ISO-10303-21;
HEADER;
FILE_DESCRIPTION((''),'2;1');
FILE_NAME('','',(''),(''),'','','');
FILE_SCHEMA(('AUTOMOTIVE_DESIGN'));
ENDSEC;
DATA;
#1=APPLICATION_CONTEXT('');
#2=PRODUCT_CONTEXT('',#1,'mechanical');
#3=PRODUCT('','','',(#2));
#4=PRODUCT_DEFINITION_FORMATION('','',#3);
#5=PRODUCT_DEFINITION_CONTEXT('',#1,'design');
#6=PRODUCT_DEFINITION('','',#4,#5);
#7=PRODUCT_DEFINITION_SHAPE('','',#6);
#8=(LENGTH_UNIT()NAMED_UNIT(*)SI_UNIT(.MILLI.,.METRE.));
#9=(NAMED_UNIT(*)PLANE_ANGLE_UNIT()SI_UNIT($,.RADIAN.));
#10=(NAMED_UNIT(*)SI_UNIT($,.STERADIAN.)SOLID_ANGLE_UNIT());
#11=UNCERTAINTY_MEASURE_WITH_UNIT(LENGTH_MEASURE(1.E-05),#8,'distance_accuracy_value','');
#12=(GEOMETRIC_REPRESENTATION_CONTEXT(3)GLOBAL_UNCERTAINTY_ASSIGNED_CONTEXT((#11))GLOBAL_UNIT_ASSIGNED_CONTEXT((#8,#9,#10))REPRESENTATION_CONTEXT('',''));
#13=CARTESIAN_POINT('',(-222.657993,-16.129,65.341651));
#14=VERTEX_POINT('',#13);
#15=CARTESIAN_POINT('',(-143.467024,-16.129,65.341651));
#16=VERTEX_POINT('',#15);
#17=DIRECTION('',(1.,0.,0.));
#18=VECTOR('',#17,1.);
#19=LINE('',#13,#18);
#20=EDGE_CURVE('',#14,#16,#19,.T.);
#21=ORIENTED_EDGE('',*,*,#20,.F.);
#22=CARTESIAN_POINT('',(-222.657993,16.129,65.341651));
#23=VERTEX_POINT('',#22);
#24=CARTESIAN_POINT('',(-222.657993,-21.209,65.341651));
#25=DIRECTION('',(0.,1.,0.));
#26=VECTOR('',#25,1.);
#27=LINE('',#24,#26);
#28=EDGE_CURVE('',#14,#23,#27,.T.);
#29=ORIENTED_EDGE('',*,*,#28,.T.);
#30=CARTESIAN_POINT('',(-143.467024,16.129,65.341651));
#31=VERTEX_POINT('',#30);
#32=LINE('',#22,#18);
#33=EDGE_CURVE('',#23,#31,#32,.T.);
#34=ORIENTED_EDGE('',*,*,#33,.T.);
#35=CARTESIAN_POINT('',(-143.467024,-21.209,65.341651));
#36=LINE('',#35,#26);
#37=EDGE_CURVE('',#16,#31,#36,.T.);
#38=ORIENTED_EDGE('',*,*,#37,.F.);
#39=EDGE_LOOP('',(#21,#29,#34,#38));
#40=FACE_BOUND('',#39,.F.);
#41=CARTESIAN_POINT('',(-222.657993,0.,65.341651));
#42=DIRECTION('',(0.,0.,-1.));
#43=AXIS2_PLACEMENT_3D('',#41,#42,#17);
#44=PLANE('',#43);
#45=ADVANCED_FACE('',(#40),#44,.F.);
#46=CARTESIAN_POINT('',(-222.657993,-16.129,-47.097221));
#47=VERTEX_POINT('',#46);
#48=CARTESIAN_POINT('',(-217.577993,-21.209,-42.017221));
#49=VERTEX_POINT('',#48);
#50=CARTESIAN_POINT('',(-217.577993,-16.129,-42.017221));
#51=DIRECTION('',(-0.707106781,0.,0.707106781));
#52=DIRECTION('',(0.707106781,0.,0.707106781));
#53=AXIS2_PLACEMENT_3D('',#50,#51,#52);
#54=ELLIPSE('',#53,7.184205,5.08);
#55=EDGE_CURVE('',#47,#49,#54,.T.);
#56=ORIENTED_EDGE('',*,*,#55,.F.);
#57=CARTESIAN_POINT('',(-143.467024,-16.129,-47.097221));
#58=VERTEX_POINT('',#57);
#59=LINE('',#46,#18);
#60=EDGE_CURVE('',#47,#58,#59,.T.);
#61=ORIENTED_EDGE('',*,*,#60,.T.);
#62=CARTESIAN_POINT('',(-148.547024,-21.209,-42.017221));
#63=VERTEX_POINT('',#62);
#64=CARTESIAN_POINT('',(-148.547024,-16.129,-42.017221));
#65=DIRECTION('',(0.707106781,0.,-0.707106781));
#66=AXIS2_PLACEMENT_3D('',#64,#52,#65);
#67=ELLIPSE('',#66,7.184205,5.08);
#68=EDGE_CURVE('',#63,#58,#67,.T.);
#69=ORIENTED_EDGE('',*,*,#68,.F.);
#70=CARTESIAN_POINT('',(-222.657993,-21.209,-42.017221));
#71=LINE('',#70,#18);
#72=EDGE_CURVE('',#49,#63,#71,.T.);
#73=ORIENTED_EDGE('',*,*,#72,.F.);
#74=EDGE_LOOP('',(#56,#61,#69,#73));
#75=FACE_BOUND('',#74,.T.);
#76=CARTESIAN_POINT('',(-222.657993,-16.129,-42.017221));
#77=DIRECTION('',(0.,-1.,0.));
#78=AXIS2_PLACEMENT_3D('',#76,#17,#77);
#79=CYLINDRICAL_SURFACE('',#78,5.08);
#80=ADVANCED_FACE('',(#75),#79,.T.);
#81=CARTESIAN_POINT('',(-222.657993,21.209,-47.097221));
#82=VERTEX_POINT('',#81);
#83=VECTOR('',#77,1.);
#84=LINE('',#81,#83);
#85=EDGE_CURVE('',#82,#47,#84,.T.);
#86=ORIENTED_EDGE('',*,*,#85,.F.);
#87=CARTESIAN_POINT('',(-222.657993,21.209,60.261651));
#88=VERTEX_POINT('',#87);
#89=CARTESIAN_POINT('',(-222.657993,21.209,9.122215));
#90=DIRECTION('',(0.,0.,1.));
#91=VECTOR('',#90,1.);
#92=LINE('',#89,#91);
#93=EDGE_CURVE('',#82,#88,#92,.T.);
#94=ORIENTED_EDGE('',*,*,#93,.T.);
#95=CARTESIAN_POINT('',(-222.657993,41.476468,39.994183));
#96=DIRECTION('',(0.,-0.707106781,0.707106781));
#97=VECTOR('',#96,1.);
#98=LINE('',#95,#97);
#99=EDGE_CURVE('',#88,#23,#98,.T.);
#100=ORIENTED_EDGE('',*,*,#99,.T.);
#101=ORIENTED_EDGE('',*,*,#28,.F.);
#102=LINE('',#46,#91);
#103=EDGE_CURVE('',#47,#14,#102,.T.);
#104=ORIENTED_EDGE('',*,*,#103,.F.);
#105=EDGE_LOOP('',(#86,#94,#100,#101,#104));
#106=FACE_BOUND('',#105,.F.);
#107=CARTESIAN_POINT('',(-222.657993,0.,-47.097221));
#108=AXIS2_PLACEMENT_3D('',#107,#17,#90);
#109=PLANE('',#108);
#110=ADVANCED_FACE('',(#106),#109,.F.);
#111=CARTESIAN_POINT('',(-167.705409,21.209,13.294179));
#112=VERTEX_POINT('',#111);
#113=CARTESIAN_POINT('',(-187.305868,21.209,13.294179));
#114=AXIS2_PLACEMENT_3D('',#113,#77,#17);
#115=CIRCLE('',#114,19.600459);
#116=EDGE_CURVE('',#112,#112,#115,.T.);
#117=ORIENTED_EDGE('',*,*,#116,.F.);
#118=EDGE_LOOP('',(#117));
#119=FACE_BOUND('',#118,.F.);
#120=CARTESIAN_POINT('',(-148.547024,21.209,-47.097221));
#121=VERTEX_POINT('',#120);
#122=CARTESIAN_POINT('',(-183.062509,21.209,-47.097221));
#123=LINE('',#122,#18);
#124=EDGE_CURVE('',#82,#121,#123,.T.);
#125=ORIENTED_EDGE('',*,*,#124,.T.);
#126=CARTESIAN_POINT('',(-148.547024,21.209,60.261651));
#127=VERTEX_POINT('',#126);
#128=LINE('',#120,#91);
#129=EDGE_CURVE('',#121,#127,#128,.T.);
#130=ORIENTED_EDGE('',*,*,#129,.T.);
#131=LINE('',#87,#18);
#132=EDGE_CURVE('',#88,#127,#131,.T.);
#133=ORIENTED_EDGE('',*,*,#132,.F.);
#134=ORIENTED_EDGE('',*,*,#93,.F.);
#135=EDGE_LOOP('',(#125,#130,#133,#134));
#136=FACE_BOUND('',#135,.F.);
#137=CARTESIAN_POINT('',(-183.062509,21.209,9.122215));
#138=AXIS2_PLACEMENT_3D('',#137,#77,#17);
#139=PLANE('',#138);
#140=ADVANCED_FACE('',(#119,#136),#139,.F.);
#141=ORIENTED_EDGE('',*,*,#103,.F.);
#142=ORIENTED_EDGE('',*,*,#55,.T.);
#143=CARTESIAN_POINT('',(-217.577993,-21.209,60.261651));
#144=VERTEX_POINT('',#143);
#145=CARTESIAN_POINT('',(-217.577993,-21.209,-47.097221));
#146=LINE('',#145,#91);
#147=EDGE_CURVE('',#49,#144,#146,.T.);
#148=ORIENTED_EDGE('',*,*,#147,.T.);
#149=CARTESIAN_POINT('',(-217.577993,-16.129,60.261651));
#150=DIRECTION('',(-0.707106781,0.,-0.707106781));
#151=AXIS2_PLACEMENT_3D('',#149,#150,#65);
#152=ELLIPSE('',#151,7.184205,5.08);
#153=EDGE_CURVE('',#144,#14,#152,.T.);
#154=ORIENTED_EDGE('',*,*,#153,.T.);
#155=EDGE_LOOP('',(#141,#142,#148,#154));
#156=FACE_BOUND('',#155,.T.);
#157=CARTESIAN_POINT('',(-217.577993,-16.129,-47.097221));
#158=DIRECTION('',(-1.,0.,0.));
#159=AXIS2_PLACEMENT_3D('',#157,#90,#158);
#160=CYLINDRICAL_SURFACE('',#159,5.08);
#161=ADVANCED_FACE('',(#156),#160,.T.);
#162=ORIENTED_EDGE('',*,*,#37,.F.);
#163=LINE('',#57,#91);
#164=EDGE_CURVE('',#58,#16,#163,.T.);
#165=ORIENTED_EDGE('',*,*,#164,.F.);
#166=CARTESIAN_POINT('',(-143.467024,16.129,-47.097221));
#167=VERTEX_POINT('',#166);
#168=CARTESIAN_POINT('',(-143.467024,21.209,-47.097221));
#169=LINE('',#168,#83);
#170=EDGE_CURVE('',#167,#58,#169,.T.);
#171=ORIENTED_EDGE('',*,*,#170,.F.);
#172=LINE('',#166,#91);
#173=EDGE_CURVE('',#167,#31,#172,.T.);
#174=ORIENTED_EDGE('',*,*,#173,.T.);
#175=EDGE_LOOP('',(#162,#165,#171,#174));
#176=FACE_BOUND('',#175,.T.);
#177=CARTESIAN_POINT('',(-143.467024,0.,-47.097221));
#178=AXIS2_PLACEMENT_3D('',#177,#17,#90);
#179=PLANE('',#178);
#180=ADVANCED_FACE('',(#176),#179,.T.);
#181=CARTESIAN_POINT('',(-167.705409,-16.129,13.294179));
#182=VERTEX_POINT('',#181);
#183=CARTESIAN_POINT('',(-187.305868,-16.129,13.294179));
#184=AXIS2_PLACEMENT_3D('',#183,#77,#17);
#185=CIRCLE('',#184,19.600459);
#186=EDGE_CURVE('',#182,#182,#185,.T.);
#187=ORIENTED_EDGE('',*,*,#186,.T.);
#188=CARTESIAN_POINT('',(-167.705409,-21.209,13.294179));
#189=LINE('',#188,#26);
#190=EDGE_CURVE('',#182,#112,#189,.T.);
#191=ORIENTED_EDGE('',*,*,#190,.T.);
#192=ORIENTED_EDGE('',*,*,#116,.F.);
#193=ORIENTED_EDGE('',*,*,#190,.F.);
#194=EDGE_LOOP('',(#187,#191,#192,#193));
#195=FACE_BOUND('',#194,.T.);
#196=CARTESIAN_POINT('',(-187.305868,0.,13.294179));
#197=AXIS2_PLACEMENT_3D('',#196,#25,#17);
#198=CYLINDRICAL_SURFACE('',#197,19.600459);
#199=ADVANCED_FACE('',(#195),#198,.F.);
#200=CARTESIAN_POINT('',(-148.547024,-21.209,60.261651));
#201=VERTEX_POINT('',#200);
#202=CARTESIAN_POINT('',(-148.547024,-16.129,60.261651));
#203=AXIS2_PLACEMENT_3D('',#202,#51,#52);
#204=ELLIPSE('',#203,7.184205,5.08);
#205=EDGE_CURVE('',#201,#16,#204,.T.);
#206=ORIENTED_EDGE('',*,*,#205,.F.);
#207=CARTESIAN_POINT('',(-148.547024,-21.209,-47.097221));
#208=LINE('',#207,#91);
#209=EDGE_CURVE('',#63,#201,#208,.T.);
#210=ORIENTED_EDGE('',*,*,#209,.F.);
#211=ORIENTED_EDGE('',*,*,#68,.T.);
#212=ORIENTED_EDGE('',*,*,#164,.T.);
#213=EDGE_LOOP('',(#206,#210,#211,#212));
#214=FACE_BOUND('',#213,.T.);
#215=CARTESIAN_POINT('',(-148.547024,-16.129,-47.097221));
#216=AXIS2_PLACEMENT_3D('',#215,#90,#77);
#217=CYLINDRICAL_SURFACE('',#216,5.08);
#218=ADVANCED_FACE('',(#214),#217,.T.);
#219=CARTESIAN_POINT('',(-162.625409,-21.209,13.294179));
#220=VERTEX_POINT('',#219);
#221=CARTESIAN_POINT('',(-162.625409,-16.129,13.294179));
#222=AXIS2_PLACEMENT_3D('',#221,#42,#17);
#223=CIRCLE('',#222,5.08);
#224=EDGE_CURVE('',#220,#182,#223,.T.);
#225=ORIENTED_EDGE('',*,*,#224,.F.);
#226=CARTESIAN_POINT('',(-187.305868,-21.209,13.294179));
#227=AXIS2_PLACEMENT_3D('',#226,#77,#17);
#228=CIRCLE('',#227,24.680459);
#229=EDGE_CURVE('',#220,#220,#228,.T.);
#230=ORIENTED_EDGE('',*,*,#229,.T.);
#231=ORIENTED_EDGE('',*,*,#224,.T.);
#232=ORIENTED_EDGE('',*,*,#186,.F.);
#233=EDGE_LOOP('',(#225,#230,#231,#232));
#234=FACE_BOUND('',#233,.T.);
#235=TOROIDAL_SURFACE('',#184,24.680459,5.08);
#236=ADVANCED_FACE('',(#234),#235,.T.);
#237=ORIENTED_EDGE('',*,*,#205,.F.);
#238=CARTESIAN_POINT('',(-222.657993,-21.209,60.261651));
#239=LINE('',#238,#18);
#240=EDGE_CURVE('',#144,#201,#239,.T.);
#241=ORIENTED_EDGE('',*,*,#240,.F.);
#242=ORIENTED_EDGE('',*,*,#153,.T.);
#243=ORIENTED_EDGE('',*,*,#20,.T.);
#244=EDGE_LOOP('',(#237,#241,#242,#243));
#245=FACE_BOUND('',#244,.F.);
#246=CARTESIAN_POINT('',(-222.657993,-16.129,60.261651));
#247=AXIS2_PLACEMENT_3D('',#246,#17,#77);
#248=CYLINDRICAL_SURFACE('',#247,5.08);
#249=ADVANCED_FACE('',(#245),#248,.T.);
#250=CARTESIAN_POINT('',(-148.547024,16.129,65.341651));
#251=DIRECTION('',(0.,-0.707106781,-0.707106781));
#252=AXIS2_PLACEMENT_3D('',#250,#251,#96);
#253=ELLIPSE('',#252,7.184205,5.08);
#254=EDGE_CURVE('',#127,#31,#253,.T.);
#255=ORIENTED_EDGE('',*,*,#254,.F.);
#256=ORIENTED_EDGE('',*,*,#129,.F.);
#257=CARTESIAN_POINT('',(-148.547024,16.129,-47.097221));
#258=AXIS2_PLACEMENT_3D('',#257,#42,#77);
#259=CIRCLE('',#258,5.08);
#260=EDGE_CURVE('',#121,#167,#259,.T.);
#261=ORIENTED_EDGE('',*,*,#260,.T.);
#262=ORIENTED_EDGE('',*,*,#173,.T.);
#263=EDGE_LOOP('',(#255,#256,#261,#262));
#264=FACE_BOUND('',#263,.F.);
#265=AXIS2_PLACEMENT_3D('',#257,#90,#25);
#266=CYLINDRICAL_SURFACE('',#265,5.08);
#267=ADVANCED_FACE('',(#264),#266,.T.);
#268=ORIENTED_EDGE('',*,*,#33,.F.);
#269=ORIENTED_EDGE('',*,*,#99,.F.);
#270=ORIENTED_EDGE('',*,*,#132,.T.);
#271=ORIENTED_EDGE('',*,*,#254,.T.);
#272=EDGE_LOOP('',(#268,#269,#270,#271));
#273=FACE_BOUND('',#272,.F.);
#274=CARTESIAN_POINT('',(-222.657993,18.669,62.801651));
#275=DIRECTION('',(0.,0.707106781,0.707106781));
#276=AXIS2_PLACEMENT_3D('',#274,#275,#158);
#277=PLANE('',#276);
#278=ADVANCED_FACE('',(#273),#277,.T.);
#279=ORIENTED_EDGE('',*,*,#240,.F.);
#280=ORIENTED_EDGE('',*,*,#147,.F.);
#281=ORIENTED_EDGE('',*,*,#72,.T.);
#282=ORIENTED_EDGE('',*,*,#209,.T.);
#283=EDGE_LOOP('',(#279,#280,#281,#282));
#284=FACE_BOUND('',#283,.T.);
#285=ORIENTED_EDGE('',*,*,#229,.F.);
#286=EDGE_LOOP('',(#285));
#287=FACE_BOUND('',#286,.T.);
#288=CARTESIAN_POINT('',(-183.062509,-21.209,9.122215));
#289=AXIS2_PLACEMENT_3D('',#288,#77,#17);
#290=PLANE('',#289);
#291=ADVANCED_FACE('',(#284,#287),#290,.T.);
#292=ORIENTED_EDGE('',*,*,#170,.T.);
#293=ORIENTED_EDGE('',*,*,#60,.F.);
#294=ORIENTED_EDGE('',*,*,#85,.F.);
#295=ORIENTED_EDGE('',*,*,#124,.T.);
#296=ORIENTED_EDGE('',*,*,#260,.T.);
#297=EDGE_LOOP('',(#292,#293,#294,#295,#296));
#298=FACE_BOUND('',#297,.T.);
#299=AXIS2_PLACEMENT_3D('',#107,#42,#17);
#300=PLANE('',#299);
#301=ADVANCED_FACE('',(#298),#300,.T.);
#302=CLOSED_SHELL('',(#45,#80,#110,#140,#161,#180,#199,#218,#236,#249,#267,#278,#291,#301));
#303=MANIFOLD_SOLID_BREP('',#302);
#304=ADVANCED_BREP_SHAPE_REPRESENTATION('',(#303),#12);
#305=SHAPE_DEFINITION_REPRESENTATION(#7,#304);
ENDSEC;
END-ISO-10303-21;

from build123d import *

# Parameters (mm, degrees)
F0_W     = 79.1909694672
F0_H     = 112.4388724566
F0_R     = 19.6004589853
F1_DEPTH = 21.209
F2_R     = 5.08
F3_SIZE  = 5.08
F4_R     = 5.08


# Not quite as in the source:
# - a feature names something its author has since deleted; it is built from what else it names


with BuildPart() as f1:
    # F0 (on Front) → F1 (new body, symmetric)
    with BuildSketch(Plane.XZ):
        with Locations((-183.0625087023, 9.1222152114)):
            Rectangle(F0_W, F0_H)
        with Locations((-187.305867672, 13.2941789925)):
            Circle(F0_R, mode=Mode.SUBTRACT)
    extrude(amount=F1_DEPTH, both=True)

    # F2
    f2_edges = [f1.edges().sort_by_distance(p)[0] for p in [
        (-183.062509, -21.209, 65.341651),
        (-222.657993, -21.209, 9.122215),
        (-183.062509, -21.209, -47.097221),
        (-143.467024, -21.209, 9.122215),
        (-206.906327, -21.209, 13.294179),
    ]]
    fillet(f2_edges, radius=F2_R)

    # F3
    f3_edges = [f1.edges().sort_by_distance(p)[0] for p in [
        (-183.062509, 21.209, 65.341651),
    ]]
    chamfer(f3_edges, length=F3_SIZE)

    # F4
    f4_edges = [f1.edges().sort_by_distance(p)[0] for p in [
        (-143.467024, 21.209, 6.582215),
    ]]
    fillet(f4_edges, radius=F4_R)


solid = f1.part
